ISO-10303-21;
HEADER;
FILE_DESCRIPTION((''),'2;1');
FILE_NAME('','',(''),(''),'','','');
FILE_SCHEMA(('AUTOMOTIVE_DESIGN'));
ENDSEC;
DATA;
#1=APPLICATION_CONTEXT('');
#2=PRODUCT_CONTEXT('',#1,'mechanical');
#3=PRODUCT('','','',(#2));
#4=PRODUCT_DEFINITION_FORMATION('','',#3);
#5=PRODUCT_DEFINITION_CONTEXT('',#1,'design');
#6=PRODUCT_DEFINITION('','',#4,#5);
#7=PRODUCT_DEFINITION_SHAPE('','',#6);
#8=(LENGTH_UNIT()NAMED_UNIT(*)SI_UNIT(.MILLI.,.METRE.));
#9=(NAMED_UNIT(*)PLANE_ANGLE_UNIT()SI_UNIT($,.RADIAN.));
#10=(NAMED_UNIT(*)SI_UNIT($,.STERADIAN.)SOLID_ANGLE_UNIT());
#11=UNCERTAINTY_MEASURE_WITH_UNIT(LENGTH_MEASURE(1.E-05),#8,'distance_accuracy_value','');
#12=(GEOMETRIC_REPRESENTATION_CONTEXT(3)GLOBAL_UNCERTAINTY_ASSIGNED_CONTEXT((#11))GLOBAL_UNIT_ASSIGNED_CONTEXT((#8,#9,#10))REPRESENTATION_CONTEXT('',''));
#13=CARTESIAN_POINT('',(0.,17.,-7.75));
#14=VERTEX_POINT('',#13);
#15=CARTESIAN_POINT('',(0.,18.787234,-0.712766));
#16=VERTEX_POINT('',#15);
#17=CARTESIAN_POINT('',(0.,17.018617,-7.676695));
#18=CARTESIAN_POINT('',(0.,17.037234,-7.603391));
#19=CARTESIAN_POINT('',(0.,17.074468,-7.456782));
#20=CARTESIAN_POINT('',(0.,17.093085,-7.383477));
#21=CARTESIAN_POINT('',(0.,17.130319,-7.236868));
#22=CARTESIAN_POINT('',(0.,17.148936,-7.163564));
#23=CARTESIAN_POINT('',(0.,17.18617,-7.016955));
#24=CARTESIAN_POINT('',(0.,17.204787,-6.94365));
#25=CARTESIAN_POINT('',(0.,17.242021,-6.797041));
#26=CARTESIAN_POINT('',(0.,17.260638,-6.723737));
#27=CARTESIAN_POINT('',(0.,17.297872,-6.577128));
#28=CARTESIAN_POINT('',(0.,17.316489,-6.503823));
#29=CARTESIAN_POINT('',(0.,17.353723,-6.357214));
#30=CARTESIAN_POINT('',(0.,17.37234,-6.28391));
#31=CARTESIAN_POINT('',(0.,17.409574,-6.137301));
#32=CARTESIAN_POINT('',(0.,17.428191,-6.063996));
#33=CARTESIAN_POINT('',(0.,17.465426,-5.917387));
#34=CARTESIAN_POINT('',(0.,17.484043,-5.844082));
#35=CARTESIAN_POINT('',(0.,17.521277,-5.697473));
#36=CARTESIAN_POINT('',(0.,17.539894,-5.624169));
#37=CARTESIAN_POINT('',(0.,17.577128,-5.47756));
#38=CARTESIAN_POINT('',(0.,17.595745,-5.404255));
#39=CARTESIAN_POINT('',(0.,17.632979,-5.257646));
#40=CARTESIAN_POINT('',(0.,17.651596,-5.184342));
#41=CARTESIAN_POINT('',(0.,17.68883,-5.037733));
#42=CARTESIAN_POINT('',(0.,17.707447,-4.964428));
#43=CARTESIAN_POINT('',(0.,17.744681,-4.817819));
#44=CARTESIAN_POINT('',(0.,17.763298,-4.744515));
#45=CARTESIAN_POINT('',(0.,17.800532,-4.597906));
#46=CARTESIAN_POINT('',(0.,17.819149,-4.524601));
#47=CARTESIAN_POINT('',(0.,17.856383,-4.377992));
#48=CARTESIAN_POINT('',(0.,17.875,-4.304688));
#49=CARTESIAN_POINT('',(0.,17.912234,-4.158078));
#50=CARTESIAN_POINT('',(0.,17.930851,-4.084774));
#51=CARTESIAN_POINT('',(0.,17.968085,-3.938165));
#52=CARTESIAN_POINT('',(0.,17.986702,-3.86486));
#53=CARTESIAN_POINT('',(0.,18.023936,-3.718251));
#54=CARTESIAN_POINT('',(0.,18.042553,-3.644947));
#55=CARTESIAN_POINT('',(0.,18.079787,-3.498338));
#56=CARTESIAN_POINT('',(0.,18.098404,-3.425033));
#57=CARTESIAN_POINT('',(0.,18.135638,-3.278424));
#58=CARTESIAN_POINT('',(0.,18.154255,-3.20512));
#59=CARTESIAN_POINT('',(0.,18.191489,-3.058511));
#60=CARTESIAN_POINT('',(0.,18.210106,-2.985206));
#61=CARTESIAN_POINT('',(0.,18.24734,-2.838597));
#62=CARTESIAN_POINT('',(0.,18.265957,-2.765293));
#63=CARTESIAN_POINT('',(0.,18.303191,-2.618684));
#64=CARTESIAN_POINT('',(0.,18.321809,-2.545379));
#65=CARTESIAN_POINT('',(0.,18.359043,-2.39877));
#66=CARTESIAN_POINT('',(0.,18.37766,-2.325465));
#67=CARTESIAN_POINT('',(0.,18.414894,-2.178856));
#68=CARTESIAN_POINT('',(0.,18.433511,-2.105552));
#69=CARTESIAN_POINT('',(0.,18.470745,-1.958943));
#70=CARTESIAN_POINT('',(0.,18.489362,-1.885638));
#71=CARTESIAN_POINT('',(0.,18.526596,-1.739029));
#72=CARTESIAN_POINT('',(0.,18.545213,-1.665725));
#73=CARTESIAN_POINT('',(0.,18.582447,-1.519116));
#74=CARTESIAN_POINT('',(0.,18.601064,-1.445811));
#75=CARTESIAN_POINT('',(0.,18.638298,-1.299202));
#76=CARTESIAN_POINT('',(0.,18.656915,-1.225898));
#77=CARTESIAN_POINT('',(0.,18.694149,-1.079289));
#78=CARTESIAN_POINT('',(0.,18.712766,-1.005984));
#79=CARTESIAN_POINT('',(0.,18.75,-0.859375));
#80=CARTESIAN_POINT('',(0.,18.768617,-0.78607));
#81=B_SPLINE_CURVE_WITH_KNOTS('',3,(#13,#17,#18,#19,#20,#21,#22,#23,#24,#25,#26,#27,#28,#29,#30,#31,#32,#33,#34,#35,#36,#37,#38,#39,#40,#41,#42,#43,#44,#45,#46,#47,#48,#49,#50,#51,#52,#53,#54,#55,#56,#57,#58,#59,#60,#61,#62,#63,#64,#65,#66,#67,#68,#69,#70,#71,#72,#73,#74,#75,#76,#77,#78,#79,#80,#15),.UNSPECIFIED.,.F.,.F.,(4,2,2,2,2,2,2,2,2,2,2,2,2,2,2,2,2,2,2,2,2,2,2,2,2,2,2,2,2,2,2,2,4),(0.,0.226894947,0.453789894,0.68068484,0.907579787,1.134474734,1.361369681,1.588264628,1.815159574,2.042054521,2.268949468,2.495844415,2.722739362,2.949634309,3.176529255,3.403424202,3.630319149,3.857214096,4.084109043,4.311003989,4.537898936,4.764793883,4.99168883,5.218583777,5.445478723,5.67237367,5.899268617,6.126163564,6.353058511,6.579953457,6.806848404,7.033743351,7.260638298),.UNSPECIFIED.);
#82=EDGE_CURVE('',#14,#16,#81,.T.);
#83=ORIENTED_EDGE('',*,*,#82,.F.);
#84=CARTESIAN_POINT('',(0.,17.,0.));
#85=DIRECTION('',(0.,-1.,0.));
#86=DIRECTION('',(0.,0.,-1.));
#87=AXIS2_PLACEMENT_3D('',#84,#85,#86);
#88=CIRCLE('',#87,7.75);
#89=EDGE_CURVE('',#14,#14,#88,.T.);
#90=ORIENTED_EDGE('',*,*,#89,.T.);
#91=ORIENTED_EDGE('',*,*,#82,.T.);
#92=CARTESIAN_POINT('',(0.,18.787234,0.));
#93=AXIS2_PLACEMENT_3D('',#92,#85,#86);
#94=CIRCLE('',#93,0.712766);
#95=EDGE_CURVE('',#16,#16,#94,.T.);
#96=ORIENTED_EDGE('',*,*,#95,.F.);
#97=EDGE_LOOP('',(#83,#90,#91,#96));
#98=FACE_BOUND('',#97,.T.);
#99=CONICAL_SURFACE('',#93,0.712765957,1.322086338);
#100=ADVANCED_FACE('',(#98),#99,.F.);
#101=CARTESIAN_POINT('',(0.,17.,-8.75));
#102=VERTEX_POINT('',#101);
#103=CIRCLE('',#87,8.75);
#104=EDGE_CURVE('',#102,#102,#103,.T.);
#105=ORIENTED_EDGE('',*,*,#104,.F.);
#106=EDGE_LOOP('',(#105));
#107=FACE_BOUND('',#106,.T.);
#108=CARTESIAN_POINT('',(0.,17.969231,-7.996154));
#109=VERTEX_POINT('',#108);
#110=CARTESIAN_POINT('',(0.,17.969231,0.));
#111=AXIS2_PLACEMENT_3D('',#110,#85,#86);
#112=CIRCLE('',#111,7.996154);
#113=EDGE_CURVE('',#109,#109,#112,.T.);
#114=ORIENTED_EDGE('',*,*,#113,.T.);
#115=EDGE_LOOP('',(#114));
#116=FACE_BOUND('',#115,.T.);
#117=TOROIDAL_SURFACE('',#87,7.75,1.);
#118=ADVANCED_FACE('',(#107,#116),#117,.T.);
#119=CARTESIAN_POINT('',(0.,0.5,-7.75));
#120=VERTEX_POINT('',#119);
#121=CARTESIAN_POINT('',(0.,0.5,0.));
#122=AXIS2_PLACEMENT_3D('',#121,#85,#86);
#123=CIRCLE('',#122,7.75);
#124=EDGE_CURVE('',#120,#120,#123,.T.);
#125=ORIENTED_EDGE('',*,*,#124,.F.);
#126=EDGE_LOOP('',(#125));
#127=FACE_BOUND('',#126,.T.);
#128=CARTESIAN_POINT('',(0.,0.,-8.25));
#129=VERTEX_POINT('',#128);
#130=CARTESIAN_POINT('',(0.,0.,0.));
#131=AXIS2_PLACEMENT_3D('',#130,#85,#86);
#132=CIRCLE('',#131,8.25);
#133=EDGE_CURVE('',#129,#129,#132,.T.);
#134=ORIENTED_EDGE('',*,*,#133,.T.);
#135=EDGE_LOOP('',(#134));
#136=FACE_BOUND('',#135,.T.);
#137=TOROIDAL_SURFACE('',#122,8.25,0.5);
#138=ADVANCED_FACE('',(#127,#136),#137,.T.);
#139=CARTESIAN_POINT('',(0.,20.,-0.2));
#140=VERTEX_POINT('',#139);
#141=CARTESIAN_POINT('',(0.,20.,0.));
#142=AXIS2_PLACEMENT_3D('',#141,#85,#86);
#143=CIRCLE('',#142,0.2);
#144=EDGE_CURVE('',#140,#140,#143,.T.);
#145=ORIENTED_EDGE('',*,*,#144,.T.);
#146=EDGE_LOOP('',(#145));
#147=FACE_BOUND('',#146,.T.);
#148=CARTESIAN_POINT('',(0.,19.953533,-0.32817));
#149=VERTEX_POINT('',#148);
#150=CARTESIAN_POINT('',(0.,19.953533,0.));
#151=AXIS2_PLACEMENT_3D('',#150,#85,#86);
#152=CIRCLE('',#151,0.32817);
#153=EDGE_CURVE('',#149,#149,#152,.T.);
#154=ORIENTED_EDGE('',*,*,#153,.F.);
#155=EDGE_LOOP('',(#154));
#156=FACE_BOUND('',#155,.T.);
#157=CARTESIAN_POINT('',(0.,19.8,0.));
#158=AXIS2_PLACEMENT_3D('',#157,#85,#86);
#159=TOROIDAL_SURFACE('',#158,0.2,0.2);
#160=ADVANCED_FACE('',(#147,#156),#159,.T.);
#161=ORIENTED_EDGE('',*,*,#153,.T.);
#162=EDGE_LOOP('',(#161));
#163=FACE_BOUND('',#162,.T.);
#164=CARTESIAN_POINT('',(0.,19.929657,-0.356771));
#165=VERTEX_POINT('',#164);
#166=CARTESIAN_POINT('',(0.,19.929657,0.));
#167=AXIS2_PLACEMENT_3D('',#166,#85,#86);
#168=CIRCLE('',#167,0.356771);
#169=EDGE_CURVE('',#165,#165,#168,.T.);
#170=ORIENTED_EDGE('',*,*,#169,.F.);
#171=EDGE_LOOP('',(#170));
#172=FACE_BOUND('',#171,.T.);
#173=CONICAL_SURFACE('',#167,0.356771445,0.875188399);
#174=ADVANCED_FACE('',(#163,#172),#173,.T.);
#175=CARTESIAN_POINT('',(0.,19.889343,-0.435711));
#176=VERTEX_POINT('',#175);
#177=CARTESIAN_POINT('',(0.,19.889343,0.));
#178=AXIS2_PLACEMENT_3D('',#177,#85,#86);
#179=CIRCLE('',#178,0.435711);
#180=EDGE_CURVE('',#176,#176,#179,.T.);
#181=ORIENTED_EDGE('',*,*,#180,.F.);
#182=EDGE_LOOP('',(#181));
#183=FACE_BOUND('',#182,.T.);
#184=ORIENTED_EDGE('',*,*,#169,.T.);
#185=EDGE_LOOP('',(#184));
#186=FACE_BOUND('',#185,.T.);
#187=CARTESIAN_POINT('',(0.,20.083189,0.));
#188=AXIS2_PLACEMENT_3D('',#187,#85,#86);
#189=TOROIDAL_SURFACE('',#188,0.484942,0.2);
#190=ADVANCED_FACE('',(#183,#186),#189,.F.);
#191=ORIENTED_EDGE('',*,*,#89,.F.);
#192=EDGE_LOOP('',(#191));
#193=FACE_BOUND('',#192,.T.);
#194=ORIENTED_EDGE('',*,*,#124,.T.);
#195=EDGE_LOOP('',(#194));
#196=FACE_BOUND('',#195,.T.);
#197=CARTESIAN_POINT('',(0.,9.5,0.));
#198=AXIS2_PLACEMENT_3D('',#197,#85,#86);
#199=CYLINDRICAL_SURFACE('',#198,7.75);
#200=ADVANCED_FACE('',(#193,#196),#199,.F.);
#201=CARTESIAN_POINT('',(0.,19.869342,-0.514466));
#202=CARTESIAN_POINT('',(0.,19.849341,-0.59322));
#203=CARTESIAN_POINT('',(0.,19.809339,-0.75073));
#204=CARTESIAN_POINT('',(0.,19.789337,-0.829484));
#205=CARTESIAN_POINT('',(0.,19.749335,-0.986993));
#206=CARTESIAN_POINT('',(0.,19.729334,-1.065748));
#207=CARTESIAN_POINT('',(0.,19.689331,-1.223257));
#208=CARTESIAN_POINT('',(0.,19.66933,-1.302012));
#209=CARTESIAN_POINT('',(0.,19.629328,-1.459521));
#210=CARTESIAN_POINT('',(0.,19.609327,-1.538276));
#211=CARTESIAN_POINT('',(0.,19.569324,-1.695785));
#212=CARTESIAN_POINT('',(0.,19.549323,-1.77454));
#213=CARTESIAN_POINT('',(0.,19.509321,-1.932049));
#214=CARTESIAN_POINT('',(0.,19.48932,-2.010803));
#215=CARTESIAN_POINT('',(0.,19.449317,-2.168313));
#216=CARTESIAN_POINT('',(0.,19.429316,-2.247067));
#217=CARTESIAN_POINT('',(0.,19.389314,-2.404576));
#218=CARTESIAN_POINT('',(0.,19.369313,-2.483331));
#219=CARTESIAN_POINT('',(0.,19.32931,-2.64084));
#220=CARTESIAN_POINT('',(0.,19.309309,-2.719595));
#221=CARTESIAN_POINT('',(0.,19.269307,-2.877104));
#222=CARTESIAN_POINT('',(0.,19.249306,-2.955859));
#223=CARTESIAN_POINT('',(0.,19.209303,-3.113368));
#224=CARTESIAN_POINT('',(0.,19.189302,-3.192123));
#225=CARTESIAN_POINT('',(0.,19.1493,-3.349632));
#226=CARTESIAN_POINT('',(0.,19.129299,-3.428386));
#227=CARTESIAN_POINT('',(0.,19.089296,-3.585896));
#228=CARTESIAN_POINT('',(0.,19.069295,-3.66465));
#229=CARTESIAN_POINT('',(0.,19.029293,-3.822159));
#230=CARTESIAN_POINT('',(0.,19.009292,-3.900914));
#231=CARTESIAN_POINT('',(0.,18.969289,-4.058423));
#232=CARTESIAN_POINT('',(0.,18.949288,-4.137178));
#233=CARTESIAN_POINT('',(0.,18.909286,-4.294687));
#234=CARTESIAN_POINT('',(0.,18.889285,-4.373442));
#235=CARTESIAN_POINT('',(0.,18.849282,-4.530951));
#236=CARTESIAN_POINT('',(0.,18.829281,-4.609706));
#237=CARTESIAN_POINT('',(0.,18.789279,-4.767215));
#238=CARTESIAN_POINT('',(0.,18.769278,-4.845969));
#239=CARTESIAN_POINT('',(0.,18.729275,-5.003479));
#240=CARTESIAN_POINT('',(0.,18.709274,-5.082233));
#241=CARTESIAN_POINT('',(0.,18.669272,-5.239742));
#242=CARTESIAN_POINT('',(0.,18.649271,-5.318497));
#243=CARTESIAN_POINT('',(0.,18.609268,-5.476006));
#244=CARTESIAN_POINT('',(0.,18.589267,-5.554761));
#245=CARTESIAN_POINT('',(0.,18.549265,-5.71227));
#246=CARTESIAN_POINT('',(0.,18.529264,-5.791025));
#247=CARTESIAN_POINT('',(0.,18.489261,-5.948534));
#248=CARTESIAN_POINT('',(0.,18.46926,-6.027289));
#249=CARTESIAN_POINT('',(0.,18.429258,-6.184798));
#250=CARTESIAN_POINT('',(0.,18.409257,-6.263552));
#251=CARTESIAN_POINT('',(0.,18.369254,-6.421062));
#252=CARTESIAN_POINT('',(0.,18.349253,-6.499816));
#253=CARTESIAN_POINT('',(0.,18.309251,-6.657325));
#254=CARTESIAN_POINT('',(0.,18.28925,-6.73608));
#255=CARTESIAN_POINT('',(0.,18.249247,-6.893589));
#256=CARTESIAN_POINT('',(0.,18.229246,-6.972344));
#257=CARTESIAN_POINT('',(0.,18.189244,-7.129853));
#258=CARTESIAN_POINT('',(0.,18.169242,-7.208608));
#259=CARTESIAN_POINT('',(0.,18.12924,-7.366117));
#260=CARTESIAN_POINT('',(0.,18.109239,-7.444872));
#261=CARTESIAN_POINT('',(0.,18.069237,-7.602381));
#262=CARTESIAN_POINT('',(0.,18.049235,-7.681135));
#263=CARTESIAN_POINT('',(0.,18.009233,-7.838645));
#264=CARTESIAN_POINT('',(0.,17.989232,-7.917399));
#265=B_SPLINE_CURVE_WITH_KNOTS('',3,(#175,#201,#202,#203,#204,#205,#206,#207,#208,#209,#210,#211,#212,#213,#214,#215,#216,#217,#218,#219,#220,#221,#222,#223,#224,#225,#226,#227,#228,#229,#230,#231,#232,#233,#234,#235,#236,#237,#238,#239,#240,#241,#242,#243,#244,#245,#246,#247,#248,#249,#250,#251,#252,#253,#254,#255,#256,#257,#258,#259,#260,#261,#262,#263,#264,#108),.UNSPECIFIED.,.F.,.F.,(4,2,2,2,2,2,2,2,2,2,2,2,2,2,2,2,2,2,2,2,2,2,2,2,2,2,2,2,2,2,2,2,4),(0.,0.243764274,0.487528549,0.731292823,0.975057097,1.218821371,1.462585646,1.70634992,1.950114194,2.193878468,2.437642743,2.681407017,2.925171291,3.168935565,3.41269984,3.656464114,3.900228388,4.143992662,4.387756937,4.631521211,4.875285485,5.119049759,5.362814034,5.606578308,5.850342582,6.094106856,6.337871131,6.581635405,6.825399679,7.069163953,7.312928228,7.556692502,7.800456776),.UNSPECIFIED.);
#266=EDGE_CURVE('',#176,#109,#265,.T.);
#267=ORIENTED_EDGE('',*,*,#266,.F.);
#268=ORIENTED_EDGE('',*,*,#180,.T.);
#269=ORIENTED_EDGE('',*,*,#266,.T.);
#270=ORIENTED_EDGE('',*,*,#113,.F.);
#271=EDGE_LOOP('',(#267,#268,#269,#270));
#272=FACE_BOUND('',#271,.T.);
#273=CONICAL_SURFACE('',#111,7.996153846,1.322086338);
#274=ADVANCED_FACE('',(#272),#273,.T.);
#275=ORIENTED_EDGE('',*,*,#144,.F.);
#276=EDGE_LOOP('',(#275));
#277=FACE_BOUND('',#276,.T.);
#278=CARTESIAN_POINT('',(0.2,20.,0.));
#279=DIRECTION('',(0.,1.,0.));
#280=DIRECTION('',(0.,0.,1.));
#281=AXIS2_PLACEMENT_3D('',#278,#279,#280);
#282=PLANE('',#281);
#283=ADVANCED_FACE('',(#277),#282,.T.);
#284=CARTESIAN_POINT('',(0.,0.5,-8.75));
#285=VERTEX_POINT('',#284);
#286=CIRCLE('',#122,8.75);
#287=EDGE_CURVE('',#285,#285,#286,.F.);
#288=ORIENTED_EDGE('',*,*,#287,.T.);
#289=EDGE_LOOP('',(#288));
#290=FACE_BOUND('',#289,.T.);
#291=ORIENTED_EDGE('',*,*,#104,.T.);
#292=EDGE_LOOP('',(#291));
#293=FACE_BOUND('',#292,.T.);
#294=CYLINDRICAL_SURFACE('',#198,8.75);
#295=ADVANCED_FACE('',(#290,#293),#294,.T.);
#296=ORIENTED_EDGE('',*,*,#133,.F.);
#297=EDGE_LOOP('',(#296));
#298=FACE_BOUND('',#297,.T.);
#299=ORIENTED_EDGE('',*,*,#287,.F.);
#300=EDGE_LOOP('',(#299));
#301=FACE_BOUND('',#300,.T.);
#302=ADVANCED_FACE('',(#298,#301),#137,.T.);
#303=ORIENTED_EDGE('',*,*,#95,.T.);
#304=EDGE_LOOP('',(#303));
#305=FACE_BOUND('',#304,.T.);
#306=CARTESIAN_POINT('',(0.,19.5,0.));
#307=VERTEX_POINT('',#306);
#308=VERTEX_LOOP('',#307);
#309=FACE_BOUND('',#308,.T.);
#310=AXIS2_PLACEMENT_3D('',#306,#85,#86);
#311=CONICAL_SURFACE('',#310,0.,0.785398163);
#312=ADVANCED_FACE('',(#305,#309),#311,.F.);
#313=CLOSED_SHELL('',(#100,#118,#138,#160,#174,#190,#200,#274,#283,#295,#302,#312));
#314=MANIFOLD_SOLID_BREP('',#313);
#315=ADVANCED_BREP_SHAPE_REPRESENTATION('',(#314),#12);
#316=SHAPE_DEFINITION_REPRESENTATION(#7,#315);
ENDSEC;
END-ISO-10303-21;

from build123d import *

# Parameters (mm, degrees)
FILLET1_R = 0.5


with BuildPart() as part:
    # Sketch1 → Revolve1 (revolve)
    with BuildSketch(Plane.XY, mode=Mode.PRIVATE) as revolve1_sk:
        with BuildLine():
            Line((7.75, 0), (7.75, 17))
            Line((7.75, 17), (0.712765957, 18.787234043))
            Line((0.712765957, 18.787234043), (0, 19.5))
            Line((0, 19.5), (0, 20))
            Line((0, 20), (0.2, 20))
            ThreePointArc((0.2, 20), (0.268166817, 19.988024693), (0.328170449, 19.95353285))
            Line((0.328170449, 19.95353285), (0.356771445, 19.92965651))
            ThreePointArc((0.356771445, 19.92965651), (0.393979876, 19.905071671), (0.435711125, 19.889343206))
            Line((0.435711125, 19.889343206), (7.996153846, 17.969230769))
            ThreePointArc((7.996153846, 17.969230769), (8.539352217, 17.613940614), (8.75, 17))
            Line((8.75, 17), (8.75, 0))
            Line((8.75, 0), (7.75, 0))
        make_face()
    revolve(revolve1_sk.sketch.rotate(Axis((0, 9.5, 0), (0, -1, 0)), 270), axis=Axis((0, 9.5, 0), (0, -1, 0)))

    # Fillet1
    fillet1_edges = [part.edges().sort_by_distance(p)[0] for p in [
        (0, 0, 8.75),
        (0, 0, 7.75),
    ]]
    fillet(fillet1_edges, radius=FILLET1_R - 0.0001)  # a hair under: the kernel refuses the full size


solid = part.part
